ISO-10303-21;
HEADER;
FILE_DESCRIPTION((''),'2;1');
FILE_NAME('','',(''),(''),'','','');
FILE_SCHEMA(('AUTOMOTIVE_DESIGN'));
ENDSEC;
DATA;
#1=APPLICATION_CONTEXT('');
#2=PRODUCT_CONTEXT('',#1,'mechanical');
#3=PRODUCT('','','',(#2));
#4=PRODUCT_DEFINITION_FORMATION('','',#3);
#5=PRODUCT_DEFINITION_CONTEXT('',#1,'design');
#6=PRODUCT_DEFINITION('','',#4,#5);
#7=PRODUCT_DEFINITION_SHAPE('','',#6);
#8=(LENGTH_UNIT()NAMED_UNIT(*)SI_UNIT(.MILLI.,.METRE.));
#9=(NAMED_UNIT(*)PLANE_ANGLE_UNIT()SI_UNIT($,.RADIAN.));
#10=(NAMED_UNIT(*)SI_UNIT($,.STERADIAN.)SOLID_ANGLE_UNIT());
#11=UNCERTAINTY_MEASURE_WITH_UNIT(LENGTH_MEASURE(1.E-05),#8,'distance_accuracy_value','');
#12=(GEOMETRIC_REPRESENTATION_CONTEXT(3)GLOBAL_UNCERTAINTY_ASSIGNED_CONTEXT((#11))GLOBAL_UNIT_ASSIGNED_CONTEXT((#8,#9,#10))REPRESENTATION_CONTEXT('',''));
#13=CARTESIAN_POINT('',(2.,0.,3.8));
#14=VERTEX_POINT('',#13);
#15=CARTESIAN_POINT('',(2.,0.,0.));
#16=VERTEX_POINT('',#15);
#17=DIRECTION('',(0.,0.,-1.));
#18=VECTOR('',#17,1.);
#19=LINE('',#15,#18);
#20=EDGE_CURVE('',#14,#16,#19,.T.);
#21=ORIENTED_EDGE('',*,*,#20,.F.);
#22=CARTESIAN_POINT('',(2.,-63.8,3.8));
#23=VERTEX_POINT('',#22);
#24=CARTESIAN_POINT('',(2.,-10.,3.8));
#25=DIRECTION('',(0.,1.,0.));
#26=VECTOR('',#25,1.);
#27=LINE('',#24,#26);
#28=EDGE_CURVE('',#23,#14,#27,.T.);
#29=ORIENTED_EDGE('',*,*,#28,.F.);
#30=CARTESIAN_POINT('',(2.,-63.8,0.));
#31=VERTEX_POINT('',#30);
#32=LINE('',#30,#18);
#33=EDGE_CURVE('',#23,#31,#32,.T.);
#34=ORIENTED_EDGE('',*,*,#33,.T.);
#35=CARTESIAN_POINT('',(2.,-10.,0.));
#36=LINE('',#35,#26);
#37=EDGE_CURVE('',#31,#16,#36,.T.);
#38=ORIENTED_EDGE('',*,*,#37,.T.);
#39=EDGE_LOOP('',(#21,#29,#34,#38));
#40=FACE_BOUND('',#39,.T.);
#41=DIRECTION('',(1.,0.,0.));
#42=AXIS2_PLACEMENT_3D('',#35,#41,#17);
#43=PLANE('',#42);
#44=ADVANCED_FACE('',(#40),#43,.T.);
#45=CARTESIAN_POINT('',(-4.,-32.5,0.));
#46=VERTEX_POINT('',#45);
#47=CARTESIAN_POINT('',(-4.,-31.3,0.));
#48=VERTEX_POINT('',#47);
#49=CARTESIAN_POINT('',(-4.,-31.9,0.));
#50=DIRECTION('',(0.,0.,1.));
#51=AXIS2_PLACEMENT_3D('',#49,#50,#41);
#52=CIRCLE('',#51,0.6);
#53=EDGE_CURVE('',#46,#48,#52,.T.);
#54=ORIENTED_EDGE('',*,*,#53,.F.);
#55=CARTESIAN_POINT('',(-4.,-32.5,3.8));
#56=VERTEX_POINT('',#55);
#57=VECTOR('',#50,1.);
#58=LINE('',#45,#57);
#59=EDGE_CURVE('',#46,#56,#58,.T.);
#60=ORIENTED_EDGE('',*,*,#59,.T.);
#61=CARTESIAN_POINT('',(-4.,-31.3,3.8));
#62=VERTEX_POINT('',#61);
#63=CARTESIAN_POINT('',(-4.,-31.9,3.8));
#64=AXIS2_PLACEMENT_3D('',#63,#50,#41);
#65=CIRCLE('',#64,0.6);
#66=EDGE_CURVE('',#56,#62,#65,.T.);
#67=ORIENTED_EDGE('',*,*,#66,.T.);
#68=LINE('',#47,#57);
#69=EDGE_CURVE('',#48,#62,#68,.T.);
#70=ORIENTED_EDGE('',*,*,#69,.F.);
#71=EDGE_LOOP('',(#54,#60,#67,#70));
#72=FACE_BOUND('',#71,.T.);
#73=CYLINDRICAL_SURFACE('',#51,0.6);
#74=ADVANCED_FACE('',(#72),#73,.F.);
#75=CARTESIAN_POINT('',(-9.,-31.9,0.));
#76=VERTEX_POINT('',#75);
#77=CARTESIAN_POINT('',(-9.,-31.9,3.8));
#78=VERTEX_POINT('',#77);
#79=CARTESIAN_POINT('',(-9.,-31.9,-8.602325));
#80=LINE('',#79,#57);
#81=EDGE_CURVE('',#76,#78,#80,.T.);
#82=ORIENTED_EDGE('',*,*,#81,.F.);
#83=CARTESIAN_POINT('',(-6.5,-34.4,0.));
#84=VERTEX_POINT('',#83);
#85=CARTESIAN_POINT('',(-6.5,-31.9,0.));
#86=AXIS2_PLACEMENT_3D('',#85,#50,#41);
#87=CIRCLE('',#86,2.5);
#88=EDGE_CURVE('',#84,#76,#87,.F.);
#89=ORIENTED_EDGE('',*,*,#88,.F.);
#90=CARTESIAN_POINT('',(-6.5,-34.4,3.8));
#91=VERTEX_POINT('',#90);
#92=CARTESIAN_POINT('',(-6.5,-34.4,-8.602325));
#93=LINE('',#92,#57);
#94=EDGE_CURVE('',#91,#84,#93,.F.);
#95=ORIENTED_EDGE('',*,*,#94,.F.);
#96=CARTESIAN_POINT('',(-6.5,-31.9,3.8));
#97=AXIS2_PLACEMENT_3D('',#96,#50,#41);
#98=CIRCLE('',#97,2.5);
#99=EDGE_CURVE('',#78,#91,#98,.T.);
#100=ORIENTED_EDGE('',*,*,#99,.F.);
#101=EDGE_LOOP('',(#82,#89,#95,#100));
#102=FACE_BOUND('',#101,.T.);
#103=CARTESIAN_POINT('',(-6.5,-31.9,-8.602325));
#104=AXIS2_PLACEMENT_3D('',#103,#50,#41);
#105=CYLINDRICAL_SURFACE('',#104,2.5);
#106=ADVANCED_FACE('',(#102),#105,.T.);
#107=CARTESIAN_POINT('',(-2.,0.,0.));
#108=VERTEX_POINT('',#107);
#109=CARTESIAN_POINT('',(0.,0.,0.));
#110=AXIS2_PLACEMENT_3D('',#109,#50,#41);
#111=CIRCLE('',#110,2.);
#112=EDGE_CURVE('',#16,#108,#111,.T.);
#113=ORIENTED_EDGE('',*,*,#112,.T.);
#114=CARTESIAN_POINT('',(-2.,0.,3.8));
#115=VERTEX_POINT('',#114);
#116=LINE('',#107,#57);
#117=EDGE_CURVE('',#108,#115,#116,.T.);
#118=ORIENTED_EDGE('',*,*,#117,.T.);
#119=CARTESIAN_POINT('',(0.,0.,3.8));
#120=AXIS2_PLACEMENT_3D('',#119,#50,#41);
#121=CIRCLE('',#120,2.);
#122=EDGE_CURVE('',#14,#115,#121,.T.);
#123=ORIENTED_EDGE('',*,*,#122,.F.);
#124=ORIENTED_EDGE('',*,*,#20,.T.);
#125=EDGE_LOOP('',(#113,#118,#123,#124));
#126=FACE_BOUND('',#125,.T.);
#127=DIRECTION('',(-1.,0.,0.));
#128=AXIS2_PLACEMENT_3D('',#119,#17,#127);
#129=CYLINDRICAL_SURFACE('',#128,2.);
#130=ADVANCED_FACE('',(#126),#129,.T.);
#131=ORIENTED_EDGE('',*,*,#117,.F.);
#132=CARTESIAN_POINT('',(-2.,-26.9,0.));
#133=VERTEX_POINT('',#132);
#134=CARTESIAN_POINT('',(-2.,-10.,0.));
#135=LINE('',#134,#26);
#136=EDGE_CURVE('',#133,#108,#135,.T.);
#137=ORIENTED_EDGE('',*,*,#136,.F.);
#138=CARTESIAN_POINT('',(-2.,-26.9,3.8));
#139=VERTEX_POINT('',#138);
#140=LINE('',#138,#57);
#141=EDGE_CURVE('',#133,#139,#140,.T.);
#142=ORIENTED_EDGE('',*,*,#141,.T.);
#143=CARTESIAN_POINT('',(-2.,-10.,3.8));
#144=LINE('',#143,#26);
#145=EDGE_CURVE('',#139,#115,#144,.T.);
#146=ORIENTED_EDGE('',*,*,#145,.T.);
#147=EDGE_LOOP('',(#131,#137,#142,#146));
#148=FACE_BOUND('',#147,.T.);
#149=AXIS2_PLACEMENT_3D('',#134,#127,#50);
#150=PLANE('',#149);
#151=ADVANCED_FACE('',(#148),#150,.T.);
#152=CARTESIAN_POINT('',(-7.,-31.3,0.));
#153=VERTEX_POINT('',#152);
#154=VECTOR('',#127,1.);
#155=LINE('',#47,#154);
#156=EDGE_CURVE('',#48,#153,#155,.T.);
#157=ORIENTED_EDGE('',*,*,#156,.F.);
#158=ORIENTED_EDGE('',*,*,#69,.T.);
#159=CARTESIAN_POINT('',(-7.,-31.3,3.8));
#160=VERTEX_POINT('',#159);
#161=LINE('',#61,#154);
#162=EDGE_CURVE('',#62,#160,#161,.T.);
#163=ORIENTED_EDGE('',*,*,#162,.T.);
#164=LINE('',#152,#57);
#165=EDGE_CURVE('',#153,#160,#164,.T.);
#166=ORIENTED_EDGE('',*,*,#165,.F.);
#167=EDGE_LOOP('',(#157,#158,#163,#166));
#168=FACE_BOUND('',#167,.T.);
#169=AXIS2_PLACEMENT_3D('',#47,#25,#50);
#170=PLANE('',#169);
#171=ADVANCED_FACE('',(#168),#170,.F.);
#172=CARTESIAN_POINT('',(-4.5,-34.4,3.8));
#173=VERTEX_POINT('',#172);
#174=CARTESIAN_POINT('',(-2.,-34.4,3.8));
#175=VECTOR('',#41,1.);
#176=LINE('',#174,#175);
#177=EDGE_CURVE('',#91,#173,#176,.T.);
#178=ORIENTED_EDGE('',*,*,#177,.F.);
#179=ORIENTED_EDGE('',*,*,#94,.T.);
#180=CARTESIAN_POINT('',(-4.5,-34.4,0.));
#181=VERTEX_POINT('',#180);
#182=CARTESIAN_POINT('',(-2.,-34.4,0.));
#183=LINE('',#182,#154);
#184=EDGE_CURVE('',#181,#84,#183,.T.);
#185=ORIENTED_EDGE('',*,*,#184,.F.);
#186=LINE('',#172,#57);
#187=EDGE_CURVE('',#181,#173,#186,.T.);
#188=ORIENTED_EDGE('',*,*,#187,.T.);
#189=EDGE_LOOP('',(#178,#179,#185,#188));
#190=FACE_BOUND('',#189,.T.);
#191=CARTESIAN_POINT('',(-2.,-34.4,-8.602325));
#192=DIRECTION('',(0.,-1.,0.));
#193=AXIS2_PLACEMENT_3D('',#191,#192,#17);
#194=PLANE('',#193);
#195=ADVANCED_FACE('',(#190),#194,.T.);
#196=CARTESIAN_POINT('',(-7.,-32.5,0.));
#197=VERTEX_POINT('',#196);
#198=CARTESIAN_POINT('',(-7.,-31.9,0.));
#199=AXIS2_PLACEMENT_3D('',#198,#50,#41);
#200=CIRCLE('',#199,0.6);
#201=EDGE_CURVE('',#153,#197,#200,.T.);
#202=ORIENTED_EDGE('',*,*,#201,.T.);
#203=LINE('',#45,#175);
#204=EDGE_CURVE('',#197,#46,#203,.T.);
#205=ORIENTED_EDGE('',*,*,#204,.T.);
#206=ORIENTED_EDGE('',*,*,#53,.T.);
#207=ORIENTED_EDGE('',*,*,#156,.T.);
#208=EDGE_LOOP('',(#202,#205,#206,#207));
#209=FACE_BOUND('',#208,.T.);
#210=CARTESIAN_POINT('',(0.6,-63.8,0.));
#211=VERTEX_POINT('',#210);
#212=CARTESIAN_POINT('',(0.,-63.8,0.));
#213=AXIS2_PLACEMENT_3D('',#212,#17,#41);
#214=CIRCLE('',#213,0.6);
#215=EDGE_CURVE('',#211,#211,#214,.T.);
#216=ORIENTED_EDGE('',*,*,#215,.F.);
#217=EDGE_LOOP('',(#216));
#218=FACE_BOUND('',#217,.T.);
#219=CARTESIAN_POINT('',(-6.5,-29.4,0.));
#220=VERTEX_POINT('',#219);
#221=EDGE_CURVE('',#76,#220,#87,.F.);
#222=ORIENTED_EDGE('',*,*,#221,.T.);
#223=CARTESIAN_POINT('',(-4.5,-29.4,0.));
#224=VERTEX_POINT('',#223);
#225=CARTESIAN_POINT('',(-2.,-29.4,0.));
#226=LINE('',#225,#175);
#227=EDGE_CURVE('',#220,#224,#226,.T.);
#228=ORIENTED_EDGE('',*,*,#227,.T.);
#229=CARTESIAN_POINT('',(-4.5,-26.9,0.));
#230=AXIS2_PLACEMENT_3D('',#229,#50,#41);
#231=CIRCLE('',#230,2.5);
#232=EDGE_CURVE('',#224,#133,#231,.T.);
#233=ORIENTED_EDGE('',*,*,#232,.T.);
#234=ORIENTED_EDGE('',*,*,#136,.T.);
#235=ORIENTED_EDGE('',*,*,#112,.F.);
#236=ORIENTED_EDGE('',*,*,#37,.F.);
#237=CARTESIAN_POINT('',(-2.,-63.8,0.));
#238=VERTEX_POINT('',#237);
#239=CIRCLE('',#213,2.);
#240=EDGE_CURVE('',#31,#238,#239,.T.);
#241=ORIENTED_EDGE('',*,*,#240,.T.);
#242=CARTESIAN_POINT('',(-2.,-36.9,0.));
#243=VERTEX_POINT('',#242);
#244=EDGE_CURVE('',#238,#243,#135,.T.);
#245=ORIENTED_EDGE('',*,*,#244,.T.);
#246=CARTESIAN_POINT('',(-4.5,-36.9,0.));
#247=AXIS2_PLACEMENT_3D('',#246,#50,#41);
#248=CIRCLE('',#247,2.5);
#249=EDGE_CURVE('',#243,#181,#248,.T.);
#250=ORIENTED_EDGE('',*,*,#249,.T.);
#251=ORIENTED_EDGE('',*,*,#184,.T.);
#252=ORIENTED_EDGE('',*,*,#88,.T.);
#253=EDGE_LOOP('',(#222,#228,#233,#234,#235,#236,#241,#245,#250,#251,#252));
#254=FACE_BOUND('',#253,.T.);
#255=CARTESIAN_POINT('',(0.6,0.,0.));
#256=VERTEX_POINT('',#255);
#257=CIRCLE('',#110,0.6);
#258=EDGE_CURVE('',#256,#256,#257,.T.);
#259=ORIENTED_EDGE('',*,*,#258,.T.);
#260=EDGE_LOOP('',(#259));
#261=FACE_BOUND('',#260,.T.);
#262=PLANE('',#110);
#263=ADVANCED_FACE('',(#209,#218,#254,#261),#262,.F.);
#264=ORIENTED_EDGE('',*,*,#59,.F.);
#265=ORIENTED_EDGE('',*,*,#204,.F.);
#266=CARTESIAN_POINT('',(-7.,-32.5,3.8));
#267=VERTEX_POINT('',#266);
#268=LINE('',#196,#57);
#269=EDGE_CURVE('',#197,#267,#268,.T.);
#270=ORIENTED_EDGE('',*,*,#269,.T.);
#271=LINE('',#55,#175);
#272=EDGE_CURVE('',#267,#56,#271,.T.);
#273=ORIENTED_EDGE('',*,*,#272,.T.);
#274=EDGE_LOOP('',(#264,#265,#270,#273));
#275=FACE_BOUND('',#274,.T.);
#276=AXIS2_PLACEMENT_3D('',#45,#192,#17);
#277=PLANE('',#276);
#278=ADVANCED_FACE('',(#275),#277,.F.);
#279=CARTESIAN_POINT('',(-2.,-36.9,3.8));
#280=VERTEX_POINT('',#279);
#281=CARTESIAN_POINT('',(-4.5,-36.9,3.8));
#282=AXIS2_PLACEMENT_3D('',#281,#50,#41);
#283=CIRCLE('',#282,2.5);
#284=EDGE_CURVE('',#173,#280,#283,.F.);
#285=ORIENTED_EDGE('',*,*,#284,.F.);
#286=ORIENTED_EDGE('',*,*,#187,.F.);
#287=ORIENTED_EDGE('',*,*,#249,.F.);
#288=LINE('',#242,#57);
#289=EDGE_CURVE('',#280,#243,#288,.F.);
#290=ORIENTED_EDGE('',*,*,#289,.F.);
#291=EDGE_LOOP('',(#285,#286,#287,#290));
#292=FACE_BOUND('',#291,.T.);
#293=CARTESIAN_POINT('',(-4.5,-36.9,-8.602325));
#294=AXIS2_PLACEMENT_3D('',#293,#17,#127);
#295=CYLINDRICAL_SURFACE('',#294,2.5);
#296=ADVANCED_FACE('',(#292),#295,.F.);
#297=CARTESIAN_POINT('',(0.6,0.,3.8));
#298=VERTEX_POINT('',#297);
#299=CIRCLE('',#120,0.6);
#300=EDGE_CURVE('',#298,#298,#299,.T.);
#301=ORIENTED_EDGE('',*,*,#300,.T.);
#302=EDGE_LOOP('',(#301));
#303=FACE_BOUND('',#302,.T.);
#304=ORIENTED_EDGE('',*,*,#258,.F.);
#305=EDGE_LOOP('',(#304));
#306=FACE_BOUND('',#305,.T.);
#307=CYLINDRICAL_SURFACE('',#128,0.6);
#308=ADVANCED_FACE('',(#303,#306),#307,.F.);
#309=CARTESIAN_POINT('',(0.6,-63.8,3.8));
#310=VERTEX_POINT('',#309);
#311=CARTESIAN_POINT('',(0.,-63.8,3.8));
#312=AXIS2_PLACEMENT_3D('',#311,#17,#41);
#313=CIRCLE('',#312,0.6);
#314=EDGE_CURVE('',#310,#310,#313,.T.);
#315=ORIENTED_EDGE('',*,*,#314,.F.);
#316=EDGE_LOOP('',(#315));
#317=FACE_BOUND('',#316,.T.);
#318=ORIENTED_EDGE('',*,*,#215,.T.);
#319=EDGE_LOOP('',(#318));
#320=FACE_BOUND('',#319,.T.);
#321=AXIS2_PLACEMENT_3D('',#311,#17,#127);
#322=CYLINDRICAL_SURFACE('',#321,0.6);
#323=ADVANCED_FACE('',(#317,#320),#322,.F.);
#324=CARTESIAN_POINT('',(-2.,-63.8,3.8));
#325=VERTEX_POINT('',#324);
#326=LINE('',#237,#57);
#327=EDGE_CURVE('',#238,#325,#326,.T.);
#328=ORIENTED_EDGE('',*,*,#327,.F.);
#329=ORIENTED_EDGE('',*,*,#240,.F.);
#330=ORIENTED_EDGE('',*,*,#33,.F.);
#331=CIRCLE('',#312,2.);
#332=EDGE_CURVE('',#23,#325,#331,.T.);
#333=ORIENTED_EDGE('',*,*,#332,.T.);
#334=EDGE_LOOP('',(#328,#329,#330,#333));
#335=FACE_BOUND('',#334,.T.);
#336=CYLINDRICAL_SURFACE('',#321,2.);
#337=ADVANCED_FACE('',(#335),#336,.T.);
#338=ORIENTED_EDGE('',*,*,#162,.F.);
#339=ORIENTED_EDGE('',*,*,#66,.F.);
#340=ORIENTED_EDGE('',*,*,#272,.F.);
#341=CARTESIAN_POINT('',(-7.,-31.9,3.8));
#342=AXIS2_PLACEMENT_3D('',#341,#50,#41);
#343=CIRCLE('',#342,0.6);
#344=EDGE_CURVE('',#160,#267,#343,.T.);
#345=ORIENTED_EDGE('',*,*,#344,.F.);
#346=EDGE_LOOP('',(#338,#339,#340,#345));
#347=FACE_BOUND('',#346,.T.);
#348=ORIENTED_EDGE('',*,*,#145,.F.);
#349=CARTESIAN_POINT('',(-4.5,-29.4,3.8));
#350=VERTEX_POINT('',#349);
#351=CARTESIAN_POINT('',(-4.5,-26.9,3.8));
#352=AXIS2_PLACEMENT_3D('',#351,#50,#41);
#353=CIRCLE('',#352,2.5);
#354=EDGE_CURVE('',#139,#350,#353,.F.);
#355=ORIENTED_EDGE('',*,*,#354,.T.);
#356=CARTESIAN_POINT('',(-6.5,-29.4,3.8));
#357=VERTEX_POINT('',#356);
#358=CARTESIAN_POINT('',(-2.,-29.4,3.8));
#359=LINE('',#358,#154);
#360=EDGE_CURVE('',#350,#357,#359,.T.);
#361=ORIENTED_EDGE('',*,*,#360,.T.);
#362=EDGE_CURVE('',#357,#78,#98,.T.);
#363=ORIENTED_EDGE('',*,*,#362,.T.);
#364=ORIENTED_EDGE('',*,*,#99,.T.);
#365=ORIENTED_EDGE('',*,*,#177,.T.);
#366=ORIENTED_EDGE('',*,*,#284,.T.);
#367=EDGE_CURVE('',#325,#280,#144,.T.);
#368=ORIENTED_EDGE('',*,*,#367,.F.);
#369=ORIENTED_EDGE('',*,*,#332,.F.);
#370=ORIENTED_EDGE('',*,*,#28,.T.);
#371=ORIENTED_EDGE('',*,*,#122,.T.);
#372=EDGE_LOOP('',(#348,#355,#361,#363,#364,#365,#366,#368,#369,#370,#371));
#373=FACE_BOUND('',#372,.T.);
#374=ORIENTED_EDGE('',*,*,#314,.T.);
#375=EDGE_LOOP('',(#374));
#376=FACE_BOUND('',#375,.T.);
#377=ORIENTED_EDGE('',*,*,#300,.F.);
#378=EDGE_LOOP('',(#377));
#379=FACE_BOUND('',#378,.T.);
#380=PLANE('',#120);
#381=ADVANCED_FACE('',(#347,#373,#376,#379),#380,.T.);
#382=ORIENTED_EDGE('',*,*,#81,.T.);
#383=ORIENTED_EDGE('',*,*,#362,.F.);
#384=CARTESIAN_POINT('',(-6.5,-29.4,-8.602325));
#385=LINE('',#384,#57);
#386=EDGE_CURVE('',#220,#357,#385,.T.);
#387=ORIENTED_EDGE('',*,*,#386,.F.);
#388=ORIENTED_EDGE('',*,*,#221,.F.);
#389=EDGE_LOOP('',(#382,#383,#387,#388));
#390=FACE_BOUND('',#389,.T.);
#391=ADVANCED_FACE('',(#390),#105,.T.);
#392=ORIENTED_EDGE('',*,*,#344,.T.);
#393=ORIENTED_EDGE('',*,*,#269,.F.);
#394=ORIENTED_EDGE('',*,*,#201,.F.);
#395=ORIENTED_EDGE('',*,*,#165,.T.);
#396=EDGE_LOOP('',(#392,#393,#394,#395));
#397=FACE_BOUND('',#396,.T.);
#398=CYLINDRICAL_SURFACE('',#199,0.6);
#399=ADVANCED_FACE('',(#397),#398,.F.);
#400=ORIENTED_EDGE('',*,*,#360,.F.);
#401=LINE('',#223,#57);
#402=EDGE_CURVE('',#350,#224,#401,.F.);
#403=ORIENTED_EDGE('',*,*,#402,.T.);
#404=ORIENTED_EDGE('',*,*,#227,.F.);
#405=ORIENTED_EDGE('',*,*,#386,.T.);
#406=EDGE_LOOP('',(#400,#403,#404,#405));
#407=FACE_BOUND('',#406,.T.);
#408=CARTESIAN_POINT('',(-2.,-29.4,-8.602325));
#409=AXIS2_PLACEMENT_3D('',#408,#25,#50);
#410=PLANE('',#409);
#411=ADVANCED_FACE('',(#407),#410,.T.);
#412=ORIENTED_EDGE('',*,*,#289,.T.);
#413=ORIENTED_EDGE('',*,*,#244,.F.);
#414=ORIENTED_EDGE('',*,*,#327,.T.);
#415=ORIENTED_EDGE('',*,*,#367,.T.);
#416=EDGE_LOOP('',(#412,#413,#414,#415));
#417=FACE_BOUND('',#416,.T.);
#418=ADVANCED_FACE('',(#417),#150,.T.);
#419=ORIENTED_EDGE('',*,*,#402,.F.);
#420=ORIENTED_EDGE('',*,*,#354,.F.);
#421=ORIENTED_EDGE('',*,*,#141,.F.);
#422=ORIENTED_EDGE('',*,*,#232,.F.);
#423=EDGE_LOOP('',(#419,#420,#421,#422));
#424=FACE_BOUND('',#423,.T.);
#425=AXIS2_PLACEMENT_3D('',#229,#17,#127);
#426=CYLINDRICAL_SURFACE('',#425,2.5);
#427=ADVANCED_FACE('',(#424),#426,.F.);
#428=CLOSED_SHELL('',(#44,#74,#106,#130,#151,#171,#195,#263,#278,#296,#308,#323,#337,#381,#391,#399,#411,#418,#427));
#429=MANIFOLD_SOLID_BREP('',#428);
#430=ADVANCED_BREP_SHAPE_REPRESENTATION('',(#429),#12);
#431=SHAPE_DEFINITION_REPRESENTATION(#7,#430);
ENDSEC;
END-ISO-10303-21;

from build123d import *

# Parameters (mm, degrees)
SKETCH_1_R          = 2
SKETCH_1_R_2        = 0.6
EXTRUDE_1_DEPTH     = 3.8
SKETCH_2_W          = 4
SKETCH_2_H          = 3.8
EXTRUDE_2_DEPTH     = 10
SKETCH_1_4_R        = 0.6
CUT_EXTRUDE_1_DEPTH = 11.883014288
SKETCH_3_W          = 4
SKETCH_3_H          = 21.9
EXTRUDE_3_DEPTH     = 3.8
SKETCH_5_W          = 7
SKETCH_5_H          = 5
EXTRUDE_4_DEPTH     = 3.8
CUT_EXTRUDE_3_DEPTH = 67.521274792
FILLET_1_R          = 2.5


with BuildPart() as part:
    # 草图1 → 凸台-拉伸1 (new body)
    with BuildSketch(Plane.XY):
        with Locations(Location((0, 0, 0), (0, 0, 180))):
            Circle(SKETCH_1_R)
        Circle(SKETCH_1_R_2, mode=Mode.SUBTRACT)
    extrude(amount=EXTRUDE_1_DEPTH)

    # 草图2 → 凸台-拉伸2 (add)
    with BuildSketch(Plane(origin=(0, 0, 0), x_dir=(1, 0, 0), z_dir=(0, 1, 0))):
        with Locations((0, -1.9)):
            Rectangle(SKETCH_2_W, SKETCH_2_H)
    extrude(amount=-EXTRUDE_2_DEPTH)

    # 草图1<4> → 切除-拉伸1 (cut, through all)
    with BuildSketch(Plane.XY):
        Circle(SKETCH_1_4_R)
    extrude(amount=CUT_EXTRUDE_1_DEPTH, mode=Mode.SUBTRACT)

    # 草图3 → 凸台-拉伸3 (add)
    with BuildSketch(Plane.XY.offset(3.8)):
        with Locations((0, -20.95)):
            Rectangle(SKETCH_3_W, SKETCH_3_H)
    extrude(amount=-EXTRUDE_3_DEPTH)

    # 镜向1: part across plane


with BuildPart() as part_1:
    add(part.part)
    add(part.part.mirror(Plane(origin=(2, -31.9, -22.262299971), x_dir=(0, 0, 1), z_dir=(0, -1, 0))))

    # 草图5 → 凸台-拉伸4 (add)
    with BuildSketch(Plane.XY.offset(3.8)):
        with Locations((-5.5, -31.9)):
            Rectangle(SKETCH_5_W, SKETCH_5_H)
    extrude(amount=-EXTRUDE_4_DEPTH)

    # 草图6 → 切除-拉伸3 (cut, through all)
    with BuildSketch(Plane.XY.offset(3.8)):
        with BuildLine():
            Line((-4, -32.5), (-7, -32.5))
            ThreePointArc((-7, -32.5), (-7.6, -31.9), (-7, -31.3))
            Line((-7, -31.3), (-4, -31.3))
            ThreePointArc((-4, -31.3), (-3.4, -31.9), (-4, -32.5))
        make_face()
    extrude(amount=-CUT_EXTRUDE_3_DEPTH, mode=Mode.SUBTRACT)

    # 圆角1
    fillet_1_edges = [part_1.edges().sort_by_distance(p)[0] for p in [
        (-2, -29.4, 1.9),
        (-2, -34.4, 1.9),
    ]]
    fillet(fillet_1_edges, radius=FILLET_1_R)
    fillet_1_2_edges = [part_1.edges().sort_by_distance(p)[0] for p in [
        (-9, -34.4, 1.9),
        (-9, -29.4, 1.9),
    ]]
    fillet(fillet_1_2_edges, radius=FILLET_1_R - 0.0001)  # a hair under: the kernel refuses the full size


solid = part_1.part
